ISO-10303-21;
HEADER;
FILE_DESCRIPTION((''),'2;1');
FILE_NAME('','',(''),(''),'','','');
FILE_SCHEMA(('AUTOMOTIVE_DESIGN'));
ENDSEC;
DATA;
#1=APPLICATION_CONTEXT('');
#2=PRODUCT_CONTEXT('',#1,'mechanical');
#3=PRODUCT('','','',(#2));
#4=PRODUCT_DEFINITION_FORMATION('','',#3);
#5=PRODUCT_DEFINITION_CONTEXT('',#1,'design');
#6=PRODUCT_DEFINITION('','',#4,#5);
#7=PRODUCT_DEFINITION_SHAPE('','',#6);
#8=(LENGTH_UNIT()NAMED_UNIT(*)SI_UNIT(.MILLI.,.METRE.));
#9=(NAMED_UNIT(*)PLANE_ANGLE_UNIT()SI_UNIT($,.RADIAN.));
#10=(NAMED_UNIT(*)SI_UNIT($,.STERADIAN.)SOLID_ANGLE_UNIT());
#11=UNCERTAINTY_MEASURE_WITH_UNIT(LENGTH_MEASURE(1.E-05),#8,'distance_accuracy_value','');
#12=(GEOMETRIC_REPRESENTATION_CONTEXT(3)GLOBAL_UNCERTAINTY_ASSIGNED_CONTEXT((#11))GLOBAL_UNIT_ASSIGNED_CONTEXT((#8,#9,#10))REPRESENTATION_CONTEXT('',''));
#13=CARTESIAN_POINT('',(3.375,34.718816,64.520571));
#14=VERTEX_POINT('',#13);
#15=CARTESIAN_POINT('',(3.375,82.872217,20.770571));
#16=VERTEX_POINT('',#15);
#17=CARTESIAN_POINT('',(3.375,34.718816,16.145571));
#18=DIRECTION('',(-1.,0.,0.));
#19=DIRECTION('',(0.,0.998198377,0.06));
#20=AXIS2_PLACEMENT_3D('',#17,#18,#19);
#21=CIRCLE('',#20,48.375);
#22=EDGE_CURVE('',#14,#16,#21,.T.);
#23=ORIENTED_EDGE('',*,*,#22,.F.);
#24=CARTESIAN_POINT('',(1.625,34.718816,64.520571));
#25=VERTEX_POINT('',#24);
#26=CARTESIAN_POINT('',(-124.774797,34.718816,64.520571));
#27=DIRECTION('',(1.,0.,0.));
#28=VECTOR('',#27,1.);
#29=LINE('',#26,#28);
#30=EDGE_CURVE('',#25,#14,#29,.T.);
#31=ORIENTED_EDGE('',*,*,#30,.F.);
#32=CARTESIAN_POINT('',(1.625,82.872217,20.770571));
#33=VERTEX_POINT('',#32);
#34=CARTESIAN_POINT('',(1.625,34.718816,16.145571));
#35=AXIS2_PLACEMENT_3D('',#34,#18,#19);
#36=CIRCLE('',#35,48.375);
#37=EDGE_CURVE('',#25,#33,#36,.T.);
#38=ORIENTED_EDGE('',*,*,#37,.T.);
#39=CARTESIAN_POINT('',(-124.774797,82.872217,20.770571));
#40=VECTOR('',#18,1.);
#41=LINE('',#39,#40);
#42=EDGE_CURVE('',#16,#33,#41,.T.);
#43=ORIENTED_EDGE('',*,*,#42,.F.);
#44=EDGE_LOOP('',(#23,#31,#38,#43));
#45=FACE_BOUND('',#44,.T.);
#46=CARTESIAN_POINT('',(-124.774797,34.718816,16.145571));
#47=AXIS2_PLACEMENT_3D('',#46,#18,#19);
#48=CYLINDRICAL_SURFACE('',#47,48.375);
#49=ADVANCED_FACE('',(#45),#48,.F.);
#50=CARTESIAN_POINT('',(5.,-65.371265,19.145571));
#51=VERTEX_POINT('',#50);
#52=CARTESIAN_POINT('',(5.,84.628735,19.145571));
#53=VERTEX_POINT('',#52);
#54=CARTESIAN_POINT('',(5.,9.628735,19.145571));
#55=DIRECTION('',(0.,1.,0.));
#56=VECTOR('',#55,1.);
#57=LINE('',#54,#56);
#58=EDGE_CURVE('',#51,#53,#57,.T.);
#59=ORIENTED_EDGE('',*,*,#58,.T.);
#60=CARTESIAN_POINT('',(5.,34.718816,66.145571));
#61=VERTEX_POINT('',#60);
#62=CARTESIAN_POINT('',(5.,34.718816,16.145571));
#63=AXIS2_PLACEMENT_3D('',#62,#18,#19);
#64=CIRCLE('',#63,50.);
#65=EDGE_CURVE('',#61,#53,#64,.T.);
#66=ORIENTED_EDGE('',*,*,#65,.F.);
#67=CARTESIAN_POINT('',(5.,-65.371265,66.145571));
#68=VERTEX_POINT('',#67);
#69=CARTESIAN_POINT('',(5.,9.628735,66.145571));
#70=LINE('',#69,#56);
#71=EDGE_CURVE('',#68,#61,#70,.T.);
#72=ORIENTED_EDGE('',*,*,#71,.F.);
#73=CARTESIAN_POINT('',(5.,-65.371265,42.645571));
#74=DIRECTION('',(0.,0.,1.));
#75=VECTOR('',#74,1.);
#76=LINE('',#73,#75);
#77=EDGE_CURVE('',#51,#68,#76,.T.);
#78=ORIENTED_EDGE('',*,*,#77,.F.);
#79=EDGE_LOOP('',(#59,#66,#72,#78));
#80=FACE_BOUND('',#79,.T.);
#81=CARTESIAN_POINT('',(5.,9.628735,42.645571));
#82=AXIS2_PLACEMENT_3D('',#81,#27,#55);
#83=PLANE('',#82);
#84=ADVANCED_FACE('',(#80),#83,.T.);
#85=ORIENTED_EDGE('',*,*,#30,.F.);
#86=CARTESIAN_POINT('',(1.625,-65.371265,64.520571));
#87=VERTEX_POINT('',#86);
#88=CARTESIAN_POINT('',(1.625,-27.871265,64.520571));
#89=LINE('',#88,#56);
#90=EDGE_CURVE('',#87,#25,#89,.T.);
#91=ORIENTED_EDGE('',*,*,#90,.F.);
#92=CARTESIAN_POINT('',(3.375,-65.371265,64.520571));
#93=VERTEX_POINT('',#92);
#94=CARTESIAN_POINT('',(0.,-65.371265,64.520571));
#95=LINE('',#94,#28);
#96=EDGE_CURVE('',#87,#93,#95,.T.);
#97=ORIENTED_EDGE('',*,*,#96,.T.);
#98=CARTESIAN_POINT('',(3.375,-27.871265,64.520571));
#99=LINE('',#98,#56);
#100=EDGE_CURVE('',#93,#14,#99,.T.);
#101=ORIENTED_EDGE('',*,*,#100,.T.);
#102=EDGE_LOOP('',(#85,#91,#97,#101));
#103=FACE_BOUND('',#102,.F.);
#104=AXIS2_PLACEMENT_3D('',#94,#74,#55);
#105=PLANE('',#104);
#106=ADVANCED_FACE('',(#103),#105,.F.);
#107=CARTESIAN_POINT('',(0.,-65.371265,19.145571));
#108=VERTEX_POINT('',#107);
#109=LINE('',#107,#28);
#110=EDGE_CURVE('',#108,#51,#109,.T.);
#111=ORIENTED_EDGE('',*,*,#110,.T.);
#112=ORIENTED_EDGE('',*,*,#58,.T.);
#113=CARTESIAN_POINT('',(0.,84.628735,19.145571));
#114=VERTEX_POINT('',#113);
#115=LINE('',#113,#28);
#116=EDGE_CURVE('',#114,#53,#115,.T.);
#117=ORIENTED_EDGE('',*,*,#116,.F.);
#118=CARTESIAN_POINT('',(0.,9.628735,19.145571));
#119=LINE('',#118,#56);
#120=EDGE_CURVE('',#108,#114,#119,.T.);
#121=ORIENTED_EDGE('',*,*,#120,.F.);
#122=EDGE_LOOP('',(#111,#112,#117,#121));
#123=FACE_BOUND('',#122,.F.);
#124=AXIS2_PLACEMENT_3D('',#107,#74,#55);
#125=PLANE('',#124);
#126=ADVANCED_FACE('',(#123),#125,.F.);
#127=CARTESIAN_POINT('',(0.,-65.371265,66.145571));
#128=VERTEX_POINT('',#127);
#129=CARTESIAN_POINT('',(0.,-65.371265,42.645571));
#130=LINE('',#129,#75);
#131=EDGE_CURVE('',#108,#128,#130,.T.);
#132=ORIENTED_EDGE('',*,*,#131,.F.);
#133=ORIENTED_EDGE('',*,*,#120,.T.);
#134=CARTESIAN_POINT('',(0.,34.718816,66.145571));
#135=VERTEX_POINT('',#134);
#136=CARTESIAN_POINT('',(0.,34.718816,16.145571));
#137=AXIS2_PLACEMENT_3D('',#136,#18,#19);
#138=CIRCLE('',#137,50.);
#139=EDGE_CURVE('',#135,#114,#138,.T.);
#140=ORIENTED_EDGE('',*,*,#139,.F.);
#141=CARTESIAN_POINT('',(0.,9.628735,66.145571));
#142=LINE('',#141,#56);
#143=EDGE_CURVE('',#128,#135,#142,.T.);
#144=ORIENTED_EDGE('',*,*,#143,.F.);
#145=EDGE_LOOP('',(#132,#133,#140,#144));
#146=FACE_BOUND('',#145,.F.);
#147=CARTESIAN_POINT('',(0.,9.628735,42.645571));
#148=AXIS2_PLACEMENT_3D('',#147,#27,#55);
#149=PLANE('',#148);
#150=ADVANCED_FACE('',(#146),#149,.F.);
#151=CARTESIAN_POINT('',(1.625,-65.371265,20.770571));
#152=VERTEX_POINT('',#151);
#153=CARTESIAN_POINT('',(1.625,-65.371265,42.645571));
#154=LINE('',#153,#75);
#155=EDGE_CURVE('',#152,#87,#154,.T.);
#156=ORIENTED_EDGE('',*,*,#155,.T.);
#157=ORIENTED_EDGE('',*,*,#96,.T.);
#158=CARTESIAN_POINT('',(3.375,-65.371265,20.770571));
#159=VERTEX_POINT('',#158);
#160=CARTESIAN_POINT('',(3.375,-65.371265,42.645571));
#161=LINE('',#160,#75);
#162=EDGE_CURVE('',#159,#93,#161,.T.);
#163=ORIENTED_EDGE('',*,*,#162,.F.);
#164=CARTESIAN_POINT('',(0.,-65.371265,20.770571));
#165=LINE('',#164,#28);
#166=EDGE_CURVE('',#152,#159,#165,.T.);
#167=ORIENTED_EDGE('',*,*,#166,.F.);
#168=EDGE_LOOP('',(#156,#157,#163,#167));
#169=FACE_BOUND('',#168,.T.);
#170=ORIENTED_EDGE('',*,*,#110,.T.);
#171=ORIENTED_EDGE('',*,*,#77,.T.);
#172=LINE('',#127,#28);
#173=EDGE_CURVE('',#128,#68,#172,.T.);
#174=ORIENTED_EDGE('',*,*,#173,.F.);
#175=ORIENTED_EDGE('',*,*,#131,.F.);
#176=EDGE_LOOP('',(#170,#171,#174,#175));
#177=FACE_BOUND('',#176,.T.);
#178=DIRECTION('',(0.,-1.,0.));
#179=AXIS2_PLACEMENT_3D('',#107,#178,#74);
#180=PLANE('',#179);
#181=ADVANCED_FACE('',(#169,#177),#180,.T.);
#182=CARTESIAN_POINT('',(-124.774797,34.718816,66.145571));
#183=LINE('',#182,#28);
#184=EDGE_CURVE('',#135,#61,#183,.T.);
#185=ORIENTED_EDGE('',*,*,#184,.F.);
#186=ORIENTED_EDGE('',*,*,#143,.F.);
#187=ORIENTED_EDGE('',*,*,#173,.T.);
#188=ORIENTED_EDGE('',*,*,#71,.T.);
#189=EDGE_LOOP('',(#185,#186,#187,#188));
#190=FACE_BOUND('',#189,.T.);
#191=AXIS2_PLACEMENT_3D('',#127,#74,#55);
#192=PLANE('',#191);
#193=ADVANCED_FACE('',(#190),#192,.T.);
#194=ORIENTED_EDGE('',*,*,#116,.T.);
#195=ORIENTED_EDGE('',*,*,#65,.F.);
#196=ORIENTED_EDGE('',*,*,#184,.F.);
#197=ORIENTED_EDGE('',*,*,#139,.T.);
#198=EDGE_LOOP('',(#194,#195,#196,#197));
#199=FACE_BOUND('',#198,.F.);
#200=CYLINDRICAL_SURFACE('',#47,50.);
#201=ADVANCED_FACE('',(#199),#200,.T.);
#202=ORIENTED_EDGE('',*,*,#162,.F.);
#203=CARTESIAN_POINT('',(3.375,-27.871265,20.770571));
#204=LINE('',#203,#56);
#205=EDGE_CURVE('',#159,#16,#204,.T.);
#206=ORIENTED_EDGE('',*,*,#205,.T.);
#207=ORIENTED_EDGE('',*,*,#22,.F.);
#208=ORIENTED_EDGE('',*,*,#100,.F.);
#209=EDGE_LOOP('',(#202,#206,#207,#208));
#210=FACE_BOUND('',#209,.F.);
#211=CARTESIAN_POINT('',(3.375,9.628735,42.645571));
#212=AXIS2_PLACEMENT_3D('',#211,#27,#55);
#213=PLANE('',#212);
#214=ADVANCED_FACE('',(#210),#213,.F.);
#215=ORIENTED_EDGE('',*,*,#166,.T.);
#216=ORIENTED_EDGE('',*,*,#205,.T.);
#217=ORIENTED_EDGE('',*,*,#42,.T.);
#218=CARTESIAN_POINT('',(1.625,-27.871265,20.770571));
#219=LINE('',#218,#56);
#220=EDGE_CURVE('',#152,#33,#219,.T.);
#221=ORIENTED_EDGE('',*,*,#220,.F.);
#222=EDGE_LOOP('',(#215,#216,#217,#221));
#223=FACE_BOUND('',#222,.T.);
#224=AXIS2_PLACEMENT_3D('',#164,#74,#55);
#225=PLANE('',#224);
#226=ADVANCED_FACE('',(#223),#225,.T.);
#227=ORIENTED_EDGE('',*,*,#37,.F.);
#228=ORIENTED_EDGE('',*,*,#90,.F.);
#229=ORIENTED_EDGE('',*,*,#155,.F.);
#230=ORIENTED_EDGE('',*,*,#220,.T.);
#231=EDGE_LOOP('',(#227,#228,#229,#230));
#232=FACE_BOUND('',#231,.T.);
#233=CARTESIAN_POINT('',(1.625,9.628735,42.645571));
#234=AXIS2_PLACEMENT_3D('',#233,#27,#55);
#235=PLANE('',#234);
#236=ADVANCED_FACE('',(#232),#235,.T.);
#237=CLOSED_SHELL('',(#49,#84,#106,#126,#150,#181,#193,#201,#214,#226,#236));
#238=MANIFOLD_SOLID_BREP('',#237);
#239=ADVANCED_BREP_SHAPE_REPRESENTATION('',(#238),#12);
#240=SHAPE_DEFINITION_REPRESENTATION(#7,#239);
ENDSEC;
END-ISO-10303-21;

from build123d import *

# Parameters (mm, degrees)
F0_W        = 150
F0_H        = 47
F1_DEPTH    = 5
F2_T1_DEPTH = 254.5495942694
F3_T        = -1.625


# Not quite as in the source:
# - a fillet or chamfer that OpenCascade refuses, or shapes differently, is made with other operations: its cross-section is extruded or revolved along the edge and cut away or added


with BuildPart() as f1:
    # F0 (on Right) → F1 (new body)
    with BuildSketch(Plane.YZ):
        with Locations((9.6287353195, 42.6455706358)):
            Rectangle(F0_W, F0_H)
    extrude(amount=F1_DEPTH)

    # F2: fillet of radius 50 on 1 edges, made by hand

    # F2_s2 → F2_t1 (cut)
    with BuildSketch(Plane.YZ.offset(-124.7747971347)):
        with BuildLine():
            ThreePointArc((84.6287353195, 19.1455706358), (68.9970894677, 52.5461200822), (34.7188164657, 66.1455706358))
            Line((34.7188164657, 66.1455706358), (84.6287353195, 66.1455706358))
            Line((84.6287353195, 66.1455706358), (84.6287353195, 19.1455706358))
        make_face()
    extrude(amount=F2_T1_DEPTH, mode=Mode.SUBTRACT)

    # F3
    f3_openings = [f1.faces().sort_by_distance(p)[0] for p in [
        (2.5, -65.371265, 42.645571),
    ]]
    offset(amount=F3_T, openings=f3_openings)


solid = f1.part
